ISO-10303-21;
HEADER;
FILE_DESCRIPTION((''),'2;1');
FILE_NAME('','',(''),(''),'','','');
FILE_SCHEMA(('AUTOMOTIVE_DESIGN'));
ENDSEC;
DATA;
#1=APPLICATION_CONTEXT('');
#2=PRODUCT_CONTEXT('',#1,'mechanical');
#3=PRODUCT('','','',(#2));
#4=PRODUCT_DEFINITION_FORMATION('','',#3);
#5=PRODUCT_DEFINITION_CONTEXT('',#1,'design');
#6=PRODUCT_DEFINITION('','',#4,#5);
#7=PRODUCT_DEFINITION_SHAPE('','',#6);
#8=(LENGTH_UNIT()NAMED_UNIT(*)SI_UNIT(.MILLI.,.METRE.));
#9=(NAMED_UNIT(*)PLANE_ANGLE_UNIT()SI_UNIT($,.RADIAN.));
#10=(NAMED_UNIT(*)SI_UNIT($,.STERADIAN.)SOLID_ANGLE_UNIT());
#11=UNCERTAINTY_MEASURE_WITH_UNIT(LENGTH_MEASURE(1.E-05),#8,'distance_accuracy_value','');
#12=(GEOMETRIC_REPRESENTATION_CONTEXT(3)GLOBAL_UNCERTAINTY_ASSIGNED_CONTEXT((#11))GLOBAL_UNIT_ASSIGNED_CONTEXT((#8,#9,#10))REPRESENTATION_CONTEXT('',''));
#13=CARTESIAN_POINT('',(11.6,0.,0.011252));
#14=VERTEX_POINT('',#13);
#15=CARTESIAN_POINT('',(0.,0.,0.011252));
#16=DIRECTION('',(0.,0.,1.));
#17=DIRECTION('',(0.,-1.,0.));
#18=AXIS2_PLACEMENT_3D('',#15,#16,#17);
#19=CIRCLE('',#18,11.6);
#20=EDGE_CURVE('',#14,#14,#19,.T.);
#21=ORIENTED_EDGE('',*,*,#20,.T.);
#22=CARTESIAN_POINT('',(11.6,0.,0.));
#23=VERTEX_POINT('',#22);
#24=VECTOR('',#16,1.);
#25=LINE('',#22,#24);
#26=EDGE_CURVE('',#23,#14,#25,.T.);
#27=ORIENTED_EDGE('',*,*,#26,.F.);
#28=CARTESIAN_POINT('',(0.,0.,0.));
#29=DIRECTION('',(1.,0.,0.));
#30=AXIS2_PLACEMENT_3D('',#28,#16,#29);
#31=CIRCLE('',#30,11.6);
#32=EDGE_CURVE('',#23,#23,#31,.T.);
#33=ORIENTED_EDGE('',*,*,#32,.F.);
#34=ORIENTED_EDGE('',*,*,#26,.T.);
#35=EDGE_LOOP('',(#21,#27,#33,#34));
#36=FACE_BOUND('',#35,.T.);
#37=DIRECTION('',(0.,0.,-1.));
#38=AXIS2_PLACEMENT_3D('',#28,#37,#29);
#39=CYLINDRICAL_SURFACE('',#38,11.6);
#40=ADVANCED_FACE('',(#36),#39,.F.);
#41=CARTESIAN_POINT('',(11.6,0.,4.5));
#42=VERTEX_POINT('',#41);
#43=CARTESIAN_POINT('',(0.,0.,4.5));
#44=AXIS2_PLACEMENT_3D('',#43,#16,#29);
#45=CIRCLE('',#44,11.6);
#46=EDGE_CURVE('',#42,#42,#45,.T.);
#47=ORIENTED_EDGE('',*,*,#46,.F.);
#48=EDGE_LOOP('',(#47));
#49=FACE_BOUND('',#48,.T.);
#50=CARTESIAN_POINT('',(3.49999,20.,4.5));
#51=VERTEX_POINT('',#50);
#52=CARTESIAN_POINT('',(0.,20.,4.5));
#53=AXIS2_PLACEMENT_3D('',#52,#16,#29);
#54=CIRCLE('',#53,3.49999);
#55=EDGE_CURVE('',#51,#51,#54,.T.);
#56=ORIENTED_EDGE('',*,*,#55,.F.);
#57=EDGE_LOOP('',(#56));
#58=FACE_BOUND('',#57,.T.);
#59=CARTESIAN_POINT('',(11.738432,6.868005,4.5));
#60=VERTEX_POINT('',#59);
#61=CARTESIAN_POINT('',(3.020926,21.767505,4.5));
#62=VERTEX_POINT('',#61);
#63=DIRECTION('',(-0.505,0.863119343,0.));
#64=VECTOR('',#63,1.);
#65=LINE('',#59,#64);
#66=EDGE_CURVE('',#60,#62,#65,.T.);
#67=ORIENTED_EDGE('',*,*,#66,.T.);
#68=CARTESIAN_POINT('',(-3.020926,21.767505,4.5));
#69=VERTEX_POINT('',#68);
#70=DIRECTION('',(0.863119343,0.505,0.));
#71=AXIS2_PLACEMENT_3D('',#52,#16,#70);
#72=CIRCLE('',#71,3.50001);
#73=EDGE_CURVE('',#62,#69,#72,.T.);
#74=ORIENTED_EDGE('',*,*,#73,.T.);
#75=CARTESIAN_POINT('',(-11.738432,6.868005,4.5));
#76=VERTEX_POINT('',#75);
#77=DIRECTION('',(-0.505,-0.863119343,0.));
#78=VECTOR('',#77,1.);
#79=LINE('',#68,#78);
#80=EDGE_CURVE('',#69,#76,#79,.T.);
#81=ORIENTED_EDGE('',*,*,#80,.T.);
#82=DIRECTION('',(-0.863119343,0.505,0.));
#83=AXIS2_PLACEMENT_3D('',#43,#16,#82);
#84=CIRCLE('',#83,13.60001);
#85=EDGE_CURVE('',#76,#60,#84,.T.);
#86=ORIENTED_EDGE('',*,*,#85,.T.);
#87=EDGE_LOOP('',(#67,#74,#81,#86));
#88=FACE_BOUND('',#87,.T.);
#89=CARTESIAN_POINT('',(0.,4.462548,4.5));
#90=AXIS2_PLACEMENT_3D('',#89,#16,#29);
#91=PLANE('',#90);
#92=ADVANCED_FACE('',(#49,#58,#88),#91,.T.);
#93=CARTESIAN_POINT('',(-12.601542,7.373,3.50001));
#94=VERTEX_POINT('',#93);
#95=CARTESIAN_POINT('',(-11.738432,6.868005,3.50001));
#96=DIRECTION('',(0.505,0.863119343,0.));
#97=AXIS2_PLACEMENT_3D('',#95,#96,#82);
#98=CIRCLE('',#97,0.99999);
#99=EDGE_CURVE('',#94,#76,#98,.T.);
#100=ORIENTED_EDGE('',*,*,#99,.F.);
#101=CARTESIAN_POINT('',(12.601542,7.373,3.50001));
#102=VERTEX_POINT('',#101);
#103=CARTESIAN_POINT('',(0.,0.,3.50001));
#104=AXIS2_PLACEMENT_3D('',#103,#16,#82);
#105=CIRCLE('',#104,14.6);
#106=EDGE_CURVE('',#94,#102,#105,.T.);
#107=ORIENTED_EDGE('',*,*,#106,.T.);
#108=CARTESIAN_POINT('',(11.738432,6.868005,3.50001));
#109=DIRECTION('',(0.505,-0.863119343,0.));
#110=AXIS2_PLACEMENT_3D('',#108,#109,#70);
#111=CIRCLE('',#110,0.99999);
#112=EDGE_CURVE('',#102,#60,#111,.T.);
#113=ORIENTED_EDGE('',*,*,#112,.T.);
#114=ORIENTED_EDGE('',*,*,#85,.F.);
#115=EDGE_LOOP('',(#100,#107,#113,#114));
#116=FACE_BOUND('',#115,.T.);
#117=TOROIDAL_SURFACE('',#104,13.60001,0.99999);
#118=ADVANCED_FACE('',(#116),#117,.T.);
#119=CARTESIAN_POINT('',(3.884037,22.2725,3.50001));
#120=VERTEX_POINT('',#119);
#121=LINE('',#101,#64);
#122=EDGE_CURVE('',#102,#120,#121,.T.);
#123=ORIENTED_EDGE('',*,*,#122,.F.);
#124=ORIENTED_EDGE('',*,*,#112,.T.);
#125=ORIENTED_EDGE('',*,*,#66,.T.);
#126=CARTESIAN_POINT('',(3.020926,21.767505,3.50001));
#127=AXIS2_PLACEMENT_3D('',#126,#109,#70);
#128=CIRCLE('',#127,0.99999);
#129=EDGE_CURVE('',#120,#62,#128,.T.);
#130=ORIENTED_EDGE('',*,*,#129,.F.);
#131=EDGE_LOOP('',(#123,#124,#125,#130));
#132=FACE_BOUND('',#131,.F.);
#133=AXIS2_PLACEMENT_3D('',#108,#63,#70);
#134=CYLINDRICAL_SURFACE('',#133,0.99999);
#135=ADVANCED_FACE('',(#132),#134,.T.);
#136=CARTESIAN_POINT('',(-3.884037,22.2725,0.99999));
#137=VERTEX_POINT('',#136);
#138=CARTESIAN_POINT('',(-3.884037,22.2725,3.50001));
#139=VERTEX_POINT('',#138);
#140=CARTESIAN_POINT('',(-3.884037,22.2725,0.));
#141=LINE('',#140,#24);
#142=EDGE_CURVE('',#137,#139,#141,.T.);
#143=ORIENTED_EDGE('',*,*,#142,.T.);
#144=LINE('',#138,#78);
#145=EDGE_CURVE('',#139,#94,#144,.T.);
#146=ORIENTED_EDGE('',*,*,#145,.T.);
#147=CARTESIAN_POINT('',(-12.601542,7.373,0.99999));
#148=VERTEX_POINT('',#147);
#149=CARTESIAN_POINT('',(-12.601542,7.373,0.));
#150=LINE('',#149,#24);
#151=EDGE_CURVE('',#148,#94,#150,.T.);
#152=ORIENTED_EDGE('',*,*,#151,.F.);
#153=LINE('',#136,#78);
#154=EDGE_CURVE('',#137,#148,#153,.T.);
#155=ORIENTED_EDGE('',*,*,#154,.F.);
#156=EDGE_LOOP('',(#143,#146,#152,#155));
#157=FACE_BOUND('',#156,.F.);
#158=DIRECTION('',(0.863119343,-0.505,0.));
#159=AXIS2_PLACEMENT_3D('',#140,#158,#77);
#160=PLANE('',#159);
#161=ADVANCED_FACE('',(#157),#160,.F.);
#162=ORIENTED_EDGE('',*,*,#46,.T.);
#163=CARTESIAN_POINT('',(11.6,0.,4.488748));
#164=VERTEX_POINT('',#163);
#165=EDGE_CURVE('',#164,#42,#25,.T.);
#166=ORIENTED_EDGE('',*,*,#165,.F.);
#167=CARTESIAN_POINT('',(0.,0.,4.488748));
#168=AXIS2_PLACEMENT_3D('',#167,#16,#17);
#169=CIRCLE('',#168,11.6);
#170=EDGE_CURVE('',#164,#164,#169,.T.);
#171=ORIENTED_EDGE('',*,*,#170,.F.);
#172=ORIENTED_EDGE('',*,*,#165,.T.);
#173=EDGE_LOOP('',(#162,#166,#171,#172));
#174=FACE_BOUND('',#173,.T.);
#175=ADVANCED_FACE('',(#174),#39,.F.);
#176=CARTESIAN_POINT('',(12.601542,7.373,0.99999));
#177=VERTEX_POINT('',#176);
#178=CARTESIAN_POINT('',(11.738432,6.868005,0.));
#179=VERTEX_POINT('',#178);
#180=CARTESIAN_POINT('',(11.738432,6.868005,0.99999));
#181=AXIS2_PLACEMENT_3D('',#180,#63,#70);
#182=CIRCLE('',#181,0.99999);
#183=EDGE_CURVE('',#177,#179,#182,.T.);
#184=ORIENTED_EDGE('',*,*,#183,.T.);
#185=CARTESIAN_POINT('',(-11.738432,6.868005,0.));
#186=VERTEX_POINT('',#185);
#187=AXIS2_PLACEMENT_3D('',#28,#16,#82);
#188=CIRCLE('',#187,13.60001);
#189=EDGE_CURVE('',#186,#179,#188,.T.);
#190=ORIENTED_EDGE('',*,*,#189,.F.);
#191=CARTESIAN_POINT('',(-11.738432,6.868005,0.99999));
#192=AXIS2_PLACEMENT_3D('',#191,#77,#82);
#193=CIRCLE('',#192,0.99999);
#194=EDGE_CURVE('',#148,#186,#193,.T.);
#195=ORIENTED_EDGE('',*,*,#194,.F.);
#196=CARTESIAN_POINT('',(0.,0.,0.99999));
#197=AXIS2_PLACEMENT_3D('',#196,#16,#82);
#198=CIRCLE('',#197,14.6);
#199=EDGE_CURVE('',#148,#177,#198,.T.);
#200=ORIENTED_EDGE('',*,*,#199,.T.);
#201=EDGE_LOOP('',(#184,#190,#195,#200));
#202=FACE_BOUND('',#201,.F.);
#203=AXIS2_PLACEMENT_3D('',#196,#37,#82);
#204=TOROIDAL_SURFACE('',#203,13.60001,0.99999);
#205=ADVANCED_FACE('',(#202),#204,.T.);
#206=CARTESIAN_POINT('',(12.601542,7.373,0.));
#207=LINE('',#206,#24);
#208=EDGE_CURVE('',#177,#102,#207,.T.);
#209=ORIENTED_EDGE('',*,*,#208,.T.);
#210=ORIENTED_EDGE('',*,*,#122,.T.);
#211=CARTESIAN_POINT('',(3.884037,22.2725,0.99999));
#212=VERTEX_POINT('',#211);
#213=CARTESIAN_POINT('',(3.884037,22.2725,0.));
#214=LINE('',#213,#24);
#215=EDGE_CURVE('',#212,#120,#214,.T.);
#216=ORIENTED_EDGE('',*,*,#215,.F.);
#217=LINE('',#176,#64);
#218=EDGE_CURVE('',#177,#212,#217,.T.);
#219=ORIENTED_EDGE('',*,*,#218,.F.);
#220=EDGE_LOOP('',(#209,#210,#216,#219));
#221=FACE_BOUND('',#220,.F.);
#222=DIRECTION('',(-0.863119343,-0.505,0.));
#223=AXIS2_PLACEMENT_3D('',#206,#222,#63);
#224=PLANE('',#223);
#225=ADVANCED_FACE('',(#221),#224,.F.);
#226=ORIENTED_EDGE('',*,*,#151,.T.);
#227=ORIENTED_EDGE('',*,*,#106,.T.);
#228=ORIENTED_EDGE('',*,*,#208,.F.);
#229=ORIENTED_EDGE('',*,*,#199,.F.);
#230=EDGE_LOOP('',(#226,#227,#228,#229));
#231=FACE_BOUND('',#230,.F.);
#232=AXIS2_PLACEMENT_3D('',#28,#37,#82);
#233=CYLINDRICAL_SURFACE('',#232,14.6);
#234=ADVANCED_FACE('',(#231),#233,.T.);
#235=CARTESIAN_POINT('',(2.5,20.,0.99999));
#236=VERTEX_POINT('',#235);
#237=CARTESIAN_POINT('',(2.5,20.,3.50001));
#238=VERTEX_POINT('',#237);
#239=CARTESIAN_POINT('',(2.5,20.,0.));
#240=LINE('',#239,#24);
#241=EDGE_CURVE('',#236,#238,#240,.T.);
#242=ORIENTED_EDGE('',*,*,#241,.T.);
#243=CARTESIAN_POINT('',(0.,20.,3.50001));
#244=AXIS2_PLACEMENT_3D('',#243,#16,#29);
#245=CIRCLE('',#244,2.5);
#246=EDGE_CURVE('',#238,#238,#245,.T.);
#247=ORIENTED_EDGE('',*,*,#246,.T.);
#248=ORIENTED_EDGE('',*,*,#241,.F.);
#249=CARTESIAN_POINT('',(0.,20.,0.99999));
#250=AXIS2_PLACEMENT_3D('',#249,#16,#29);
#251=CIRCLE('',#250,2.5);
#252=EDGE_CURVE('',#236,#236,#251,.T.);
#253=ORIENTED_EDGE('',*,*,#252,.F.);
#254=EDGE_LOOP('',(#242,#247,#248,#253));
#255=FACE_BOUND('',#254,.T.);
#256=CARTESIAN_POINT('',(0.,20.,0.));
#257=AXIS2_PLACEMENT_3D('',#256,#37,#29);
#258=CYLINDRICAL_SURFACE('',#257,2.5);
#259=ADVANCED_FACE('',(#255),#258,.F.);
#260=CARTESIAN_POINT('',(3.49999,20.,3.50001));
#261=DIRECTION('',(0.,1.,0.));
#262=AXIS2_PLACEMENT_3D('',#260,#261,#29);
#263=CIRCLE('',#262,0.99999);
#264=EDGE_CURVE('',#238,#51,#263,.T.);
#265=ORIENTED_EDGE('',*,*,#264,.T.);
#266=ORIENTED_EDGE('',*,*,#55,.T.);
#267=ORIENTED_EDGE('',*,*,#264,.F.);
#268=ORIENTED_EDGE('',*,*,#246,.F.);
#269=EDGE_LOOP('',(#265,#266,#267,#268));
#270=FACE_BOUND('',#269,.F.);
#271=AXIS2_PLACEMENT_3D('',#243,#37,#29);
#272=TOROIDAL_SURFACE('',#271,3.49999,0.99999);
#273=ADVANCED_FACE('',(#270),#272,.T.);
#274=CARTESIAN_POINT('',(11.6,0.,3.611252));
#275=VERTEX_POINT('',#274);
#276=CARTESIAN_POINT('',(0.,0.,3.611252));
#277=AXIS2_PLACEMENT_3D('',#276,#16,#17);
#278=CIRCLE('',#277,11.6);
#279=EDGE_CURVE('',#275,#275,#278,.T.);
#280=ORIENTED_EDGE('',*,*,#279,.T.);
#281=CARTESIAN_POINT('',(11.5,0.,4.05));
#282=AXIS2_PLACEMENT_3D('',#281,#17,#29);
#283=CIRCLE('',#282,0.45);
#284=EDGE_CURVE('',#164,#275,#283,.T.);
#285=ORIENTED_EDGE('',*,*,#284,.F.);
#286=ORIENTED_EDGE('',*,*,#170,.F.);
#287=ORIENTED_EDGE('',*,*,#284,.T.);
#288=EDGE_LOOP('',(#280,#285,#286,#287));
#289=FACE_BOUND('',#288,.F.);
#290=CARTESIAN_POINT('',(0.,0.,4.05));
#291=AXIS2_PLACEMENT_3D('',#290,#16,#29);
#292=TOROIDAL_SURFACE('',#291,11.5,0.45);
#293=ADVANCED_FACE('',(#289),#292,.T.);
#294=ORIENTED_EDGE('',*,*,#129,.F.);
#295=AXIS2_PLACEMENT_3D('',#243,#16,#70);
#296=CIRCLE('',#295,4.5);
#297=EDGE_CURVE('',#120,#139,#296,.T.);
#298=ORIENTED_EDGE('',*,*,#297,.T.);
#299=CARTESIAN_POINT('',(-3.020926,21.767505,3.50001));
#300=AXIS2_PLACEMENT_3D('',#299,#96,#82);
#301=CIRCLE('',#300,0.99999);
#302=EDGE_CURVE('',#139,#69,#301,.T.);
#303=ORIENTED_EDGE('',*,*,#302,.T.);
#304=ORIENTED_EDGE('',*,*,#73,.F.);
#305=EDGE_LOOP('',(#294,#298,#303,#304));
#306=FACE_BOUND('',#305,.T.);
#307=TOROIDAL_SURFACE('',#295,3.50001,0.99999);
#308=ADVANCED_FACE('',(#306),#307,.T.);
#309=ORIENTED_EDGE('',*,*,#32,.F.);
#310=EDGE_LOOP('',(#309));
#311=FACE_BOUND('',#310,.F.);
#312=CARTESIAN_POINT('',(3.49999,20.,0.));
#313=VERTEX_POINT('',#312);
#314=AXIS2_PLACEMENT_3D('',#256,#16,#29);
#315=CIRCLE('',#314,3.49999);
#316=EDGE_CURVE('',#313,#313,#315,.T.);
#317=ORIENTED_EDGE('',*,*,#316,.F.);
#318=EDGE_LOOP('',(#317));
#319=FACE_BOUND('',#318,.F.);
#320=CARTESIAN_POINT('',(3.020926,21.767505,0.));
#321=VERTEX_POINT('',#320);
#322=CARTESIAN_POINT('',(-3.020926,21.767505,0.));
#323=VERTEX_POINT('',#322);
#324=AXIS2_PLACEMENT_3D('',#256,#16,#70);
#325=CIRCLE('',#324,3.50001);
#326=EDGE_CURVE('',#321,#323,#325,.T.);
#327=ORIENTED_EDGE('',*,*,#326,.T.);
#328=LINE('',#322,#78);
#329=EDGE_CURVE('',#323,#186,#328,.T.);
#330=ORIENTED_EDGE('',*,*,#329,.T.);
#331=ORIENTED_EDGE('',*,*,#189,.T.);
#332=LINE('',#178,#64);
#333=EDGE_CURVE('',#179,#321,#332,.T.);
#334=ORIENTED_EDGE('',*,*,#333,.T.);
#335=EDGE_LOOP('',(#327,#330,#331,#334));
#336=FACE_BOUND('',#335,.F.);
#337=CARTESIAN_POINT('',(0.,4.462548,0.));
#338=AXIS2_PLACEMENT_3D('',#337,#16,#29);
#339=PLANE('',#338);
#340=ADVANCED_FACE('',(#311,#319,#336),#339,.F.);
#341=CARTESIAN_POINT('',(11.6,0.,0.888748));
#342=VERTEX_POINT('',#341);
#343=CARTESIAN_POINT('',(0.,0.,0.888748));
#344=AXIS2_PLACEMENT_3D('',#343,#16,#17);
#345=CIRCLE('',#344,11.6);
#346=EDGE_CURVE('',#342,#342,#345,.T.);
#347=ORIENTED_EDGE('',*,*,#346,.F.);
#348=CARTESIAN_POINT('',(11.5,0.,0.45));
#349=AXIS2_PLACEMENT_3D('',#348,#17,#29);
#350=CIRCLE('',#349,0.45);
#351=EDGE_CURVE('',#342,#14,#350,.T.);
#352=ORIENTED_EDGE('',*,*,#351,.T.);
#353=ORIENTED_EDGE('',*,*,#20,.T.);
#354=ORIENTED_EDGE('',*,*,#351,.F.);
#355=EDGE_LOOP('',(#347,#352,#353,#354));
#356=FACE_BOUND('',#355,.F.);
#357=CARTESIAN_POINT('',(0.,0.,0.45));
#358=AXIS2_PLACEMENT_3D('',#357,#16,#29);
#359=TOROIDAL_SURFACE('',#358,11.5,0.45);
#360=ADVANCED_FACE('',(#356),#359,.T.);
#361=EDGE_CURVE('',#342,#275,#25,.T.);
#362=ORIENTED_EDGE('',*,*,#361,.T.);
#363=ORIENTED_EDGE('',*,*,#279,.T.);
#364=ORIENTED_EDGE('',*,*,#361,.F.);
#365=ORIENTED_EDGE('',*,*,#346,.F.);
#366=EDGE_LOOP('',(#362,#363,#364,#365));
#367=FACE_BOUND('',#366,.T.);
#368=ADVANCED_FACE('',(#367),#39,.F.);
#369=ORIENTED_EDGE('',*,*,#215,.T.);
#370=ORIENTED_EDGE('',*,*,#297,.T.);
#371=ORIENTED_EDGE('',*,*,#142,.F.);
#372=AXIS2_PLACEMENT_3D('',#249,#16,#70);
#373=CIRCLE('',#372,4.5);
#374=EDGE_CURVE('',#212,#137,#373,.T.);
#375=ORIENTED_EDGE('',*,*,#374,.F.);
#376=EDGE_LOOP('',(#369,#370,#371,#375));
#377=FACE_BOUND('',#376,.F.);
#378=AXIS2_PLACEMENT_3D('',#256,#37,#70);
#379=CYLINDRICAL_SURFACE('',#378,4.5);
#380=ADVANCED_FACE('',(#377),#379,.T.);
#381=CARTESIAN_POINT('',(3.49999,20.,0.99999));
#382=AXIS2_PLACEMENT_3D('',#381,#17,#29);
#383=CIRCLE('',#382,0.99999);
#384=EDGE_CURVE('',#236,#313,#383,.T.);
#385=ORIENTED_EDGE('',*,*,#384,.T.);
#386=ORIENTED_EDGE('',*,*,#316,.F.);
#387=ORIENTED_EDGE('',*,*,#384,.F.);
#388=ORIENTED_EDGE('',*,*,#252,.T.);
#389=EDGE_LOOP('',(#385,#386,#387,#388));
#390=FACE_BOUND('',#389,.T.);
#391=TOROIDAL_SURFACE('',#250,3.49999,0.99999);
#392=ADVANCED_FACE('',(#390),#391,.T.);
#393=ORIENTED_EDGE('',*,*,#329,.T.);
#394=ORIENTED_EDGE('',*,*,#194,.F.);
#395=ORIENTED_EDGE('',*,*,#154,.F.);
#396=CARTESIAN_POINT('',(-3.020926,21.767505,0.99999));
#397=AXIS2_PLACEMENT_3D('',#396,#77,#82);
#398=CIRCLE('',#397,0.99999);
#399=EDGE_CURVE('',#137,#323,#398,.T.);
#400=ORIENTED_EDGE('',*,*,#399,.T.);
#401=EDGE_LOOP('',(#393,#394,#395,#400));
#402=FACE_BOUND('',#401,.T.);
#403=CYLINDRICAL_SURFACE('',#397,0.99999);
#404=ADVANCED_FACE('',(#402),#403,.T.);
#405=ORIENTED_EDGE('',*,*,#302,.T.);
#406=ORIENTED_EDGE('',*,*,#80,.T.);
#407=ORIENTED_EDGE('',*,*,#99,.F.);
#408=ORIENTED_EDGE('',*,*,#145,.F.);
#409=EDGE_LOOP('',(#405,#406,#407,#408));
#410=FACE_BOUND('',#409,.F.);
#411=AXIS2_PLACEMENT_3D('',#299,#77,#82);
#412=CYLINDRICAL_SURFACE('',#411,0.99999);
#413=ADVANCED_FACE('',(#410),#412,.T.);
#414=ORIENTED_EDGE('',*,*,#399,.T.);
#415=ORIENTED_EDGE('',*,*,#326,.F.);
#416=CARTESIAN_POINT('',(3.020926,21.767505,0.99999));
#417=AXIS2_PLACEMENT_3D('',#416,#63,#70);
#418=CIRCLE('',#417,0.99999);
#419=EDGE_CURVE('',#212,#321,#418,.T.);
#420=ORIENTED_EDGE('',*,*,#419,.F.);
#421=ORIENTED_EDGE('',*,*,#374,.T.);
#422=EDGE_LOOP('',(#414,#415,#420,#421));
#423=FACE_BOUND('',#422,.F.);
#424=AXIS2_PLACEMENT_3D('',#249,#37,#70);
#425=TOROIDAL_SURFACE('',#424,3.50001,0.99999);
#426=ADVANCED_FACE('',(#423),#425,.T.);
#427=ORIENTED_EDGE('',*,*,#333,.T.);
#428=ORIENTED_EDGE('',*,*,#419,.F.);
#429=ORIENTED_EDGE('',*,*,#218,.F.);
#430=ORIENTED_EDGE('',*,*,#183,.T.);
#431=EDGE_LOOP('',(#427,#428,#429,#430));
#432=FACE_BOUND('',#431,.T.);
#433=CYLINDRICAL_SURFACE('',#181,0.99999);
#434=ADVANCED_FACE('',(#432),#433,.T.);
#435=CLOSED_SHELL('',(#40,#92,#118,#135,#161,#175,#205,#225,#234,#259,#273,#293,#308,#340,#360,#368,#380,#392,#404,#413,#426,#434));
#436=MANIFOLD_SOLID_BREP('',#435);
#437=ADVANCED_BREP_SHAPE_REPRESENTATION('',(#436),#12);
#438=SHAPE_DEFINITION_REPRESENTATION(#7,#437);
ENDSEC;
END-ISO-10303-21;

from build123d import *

# Parameters (mm, degrees)
F0_R     = 11.6
F0_R_2   = 2.5
F1_DEPTH = 4.5
F2_R     = 0.99999
F3_R     = 0.45


# Not quite as in the source:
# - a fillet or chamfer is up to 0.001 mm smaller than in the source, because OpenCascade refuses the exact size


with BuildPart() as f1:
    # F0 (on Top) → F1 (new body)
    with BuildSketch(Plane.XY):
        with BuildLine():
            ThreePointArc((3.8840370428, 22.2725), (0, 24.5), (-3.8840370428, 22.2725))
            Line((-3.8840370428, 22.2725), (-12.6015424056, 7.373))
            ThreePointArc((-12.6015424056, 7.373), (0, -14.6), (12.6015424056, 7.373))
            Line((12.6015424056, 7.373), (3.8840370428, 22.2725))
        make_face()
        Circle(F0_R, mode=Mode.SUBTRACT)
        with Locations((0, 20)):
            Circle(F0_R_2, mode=Mode.SUBTRACT)
    extrude(amount=F1_DEPTH)

    # F2 (radius 1 in the source; OpenCascade refuses exactly that, so slightly less here)
    f2_edges = [f1.edges().sort_by_distance(p)[0] for p in [
        (-2.5, 20, 4.5),
        (-2.5, 20, 0),
        (0, -14.6, 4.5),
        (8.24279, 14.82275, 0),
    ]]
    fillet(f2_edges, radius=F2_R)

    # F3 (on Front) → F4 (revolve)
    with BuildSketch(Plane.XZ):
        with Locations((11.5, 4.05)):
            Circle(F3_R)
        with Locations((11.5, 0.45)):
            Circle(F3_R)
    revolve(axis=Axis((0, 0, 3.4984555226), (0, 0, -1)))


solid = f1.part
